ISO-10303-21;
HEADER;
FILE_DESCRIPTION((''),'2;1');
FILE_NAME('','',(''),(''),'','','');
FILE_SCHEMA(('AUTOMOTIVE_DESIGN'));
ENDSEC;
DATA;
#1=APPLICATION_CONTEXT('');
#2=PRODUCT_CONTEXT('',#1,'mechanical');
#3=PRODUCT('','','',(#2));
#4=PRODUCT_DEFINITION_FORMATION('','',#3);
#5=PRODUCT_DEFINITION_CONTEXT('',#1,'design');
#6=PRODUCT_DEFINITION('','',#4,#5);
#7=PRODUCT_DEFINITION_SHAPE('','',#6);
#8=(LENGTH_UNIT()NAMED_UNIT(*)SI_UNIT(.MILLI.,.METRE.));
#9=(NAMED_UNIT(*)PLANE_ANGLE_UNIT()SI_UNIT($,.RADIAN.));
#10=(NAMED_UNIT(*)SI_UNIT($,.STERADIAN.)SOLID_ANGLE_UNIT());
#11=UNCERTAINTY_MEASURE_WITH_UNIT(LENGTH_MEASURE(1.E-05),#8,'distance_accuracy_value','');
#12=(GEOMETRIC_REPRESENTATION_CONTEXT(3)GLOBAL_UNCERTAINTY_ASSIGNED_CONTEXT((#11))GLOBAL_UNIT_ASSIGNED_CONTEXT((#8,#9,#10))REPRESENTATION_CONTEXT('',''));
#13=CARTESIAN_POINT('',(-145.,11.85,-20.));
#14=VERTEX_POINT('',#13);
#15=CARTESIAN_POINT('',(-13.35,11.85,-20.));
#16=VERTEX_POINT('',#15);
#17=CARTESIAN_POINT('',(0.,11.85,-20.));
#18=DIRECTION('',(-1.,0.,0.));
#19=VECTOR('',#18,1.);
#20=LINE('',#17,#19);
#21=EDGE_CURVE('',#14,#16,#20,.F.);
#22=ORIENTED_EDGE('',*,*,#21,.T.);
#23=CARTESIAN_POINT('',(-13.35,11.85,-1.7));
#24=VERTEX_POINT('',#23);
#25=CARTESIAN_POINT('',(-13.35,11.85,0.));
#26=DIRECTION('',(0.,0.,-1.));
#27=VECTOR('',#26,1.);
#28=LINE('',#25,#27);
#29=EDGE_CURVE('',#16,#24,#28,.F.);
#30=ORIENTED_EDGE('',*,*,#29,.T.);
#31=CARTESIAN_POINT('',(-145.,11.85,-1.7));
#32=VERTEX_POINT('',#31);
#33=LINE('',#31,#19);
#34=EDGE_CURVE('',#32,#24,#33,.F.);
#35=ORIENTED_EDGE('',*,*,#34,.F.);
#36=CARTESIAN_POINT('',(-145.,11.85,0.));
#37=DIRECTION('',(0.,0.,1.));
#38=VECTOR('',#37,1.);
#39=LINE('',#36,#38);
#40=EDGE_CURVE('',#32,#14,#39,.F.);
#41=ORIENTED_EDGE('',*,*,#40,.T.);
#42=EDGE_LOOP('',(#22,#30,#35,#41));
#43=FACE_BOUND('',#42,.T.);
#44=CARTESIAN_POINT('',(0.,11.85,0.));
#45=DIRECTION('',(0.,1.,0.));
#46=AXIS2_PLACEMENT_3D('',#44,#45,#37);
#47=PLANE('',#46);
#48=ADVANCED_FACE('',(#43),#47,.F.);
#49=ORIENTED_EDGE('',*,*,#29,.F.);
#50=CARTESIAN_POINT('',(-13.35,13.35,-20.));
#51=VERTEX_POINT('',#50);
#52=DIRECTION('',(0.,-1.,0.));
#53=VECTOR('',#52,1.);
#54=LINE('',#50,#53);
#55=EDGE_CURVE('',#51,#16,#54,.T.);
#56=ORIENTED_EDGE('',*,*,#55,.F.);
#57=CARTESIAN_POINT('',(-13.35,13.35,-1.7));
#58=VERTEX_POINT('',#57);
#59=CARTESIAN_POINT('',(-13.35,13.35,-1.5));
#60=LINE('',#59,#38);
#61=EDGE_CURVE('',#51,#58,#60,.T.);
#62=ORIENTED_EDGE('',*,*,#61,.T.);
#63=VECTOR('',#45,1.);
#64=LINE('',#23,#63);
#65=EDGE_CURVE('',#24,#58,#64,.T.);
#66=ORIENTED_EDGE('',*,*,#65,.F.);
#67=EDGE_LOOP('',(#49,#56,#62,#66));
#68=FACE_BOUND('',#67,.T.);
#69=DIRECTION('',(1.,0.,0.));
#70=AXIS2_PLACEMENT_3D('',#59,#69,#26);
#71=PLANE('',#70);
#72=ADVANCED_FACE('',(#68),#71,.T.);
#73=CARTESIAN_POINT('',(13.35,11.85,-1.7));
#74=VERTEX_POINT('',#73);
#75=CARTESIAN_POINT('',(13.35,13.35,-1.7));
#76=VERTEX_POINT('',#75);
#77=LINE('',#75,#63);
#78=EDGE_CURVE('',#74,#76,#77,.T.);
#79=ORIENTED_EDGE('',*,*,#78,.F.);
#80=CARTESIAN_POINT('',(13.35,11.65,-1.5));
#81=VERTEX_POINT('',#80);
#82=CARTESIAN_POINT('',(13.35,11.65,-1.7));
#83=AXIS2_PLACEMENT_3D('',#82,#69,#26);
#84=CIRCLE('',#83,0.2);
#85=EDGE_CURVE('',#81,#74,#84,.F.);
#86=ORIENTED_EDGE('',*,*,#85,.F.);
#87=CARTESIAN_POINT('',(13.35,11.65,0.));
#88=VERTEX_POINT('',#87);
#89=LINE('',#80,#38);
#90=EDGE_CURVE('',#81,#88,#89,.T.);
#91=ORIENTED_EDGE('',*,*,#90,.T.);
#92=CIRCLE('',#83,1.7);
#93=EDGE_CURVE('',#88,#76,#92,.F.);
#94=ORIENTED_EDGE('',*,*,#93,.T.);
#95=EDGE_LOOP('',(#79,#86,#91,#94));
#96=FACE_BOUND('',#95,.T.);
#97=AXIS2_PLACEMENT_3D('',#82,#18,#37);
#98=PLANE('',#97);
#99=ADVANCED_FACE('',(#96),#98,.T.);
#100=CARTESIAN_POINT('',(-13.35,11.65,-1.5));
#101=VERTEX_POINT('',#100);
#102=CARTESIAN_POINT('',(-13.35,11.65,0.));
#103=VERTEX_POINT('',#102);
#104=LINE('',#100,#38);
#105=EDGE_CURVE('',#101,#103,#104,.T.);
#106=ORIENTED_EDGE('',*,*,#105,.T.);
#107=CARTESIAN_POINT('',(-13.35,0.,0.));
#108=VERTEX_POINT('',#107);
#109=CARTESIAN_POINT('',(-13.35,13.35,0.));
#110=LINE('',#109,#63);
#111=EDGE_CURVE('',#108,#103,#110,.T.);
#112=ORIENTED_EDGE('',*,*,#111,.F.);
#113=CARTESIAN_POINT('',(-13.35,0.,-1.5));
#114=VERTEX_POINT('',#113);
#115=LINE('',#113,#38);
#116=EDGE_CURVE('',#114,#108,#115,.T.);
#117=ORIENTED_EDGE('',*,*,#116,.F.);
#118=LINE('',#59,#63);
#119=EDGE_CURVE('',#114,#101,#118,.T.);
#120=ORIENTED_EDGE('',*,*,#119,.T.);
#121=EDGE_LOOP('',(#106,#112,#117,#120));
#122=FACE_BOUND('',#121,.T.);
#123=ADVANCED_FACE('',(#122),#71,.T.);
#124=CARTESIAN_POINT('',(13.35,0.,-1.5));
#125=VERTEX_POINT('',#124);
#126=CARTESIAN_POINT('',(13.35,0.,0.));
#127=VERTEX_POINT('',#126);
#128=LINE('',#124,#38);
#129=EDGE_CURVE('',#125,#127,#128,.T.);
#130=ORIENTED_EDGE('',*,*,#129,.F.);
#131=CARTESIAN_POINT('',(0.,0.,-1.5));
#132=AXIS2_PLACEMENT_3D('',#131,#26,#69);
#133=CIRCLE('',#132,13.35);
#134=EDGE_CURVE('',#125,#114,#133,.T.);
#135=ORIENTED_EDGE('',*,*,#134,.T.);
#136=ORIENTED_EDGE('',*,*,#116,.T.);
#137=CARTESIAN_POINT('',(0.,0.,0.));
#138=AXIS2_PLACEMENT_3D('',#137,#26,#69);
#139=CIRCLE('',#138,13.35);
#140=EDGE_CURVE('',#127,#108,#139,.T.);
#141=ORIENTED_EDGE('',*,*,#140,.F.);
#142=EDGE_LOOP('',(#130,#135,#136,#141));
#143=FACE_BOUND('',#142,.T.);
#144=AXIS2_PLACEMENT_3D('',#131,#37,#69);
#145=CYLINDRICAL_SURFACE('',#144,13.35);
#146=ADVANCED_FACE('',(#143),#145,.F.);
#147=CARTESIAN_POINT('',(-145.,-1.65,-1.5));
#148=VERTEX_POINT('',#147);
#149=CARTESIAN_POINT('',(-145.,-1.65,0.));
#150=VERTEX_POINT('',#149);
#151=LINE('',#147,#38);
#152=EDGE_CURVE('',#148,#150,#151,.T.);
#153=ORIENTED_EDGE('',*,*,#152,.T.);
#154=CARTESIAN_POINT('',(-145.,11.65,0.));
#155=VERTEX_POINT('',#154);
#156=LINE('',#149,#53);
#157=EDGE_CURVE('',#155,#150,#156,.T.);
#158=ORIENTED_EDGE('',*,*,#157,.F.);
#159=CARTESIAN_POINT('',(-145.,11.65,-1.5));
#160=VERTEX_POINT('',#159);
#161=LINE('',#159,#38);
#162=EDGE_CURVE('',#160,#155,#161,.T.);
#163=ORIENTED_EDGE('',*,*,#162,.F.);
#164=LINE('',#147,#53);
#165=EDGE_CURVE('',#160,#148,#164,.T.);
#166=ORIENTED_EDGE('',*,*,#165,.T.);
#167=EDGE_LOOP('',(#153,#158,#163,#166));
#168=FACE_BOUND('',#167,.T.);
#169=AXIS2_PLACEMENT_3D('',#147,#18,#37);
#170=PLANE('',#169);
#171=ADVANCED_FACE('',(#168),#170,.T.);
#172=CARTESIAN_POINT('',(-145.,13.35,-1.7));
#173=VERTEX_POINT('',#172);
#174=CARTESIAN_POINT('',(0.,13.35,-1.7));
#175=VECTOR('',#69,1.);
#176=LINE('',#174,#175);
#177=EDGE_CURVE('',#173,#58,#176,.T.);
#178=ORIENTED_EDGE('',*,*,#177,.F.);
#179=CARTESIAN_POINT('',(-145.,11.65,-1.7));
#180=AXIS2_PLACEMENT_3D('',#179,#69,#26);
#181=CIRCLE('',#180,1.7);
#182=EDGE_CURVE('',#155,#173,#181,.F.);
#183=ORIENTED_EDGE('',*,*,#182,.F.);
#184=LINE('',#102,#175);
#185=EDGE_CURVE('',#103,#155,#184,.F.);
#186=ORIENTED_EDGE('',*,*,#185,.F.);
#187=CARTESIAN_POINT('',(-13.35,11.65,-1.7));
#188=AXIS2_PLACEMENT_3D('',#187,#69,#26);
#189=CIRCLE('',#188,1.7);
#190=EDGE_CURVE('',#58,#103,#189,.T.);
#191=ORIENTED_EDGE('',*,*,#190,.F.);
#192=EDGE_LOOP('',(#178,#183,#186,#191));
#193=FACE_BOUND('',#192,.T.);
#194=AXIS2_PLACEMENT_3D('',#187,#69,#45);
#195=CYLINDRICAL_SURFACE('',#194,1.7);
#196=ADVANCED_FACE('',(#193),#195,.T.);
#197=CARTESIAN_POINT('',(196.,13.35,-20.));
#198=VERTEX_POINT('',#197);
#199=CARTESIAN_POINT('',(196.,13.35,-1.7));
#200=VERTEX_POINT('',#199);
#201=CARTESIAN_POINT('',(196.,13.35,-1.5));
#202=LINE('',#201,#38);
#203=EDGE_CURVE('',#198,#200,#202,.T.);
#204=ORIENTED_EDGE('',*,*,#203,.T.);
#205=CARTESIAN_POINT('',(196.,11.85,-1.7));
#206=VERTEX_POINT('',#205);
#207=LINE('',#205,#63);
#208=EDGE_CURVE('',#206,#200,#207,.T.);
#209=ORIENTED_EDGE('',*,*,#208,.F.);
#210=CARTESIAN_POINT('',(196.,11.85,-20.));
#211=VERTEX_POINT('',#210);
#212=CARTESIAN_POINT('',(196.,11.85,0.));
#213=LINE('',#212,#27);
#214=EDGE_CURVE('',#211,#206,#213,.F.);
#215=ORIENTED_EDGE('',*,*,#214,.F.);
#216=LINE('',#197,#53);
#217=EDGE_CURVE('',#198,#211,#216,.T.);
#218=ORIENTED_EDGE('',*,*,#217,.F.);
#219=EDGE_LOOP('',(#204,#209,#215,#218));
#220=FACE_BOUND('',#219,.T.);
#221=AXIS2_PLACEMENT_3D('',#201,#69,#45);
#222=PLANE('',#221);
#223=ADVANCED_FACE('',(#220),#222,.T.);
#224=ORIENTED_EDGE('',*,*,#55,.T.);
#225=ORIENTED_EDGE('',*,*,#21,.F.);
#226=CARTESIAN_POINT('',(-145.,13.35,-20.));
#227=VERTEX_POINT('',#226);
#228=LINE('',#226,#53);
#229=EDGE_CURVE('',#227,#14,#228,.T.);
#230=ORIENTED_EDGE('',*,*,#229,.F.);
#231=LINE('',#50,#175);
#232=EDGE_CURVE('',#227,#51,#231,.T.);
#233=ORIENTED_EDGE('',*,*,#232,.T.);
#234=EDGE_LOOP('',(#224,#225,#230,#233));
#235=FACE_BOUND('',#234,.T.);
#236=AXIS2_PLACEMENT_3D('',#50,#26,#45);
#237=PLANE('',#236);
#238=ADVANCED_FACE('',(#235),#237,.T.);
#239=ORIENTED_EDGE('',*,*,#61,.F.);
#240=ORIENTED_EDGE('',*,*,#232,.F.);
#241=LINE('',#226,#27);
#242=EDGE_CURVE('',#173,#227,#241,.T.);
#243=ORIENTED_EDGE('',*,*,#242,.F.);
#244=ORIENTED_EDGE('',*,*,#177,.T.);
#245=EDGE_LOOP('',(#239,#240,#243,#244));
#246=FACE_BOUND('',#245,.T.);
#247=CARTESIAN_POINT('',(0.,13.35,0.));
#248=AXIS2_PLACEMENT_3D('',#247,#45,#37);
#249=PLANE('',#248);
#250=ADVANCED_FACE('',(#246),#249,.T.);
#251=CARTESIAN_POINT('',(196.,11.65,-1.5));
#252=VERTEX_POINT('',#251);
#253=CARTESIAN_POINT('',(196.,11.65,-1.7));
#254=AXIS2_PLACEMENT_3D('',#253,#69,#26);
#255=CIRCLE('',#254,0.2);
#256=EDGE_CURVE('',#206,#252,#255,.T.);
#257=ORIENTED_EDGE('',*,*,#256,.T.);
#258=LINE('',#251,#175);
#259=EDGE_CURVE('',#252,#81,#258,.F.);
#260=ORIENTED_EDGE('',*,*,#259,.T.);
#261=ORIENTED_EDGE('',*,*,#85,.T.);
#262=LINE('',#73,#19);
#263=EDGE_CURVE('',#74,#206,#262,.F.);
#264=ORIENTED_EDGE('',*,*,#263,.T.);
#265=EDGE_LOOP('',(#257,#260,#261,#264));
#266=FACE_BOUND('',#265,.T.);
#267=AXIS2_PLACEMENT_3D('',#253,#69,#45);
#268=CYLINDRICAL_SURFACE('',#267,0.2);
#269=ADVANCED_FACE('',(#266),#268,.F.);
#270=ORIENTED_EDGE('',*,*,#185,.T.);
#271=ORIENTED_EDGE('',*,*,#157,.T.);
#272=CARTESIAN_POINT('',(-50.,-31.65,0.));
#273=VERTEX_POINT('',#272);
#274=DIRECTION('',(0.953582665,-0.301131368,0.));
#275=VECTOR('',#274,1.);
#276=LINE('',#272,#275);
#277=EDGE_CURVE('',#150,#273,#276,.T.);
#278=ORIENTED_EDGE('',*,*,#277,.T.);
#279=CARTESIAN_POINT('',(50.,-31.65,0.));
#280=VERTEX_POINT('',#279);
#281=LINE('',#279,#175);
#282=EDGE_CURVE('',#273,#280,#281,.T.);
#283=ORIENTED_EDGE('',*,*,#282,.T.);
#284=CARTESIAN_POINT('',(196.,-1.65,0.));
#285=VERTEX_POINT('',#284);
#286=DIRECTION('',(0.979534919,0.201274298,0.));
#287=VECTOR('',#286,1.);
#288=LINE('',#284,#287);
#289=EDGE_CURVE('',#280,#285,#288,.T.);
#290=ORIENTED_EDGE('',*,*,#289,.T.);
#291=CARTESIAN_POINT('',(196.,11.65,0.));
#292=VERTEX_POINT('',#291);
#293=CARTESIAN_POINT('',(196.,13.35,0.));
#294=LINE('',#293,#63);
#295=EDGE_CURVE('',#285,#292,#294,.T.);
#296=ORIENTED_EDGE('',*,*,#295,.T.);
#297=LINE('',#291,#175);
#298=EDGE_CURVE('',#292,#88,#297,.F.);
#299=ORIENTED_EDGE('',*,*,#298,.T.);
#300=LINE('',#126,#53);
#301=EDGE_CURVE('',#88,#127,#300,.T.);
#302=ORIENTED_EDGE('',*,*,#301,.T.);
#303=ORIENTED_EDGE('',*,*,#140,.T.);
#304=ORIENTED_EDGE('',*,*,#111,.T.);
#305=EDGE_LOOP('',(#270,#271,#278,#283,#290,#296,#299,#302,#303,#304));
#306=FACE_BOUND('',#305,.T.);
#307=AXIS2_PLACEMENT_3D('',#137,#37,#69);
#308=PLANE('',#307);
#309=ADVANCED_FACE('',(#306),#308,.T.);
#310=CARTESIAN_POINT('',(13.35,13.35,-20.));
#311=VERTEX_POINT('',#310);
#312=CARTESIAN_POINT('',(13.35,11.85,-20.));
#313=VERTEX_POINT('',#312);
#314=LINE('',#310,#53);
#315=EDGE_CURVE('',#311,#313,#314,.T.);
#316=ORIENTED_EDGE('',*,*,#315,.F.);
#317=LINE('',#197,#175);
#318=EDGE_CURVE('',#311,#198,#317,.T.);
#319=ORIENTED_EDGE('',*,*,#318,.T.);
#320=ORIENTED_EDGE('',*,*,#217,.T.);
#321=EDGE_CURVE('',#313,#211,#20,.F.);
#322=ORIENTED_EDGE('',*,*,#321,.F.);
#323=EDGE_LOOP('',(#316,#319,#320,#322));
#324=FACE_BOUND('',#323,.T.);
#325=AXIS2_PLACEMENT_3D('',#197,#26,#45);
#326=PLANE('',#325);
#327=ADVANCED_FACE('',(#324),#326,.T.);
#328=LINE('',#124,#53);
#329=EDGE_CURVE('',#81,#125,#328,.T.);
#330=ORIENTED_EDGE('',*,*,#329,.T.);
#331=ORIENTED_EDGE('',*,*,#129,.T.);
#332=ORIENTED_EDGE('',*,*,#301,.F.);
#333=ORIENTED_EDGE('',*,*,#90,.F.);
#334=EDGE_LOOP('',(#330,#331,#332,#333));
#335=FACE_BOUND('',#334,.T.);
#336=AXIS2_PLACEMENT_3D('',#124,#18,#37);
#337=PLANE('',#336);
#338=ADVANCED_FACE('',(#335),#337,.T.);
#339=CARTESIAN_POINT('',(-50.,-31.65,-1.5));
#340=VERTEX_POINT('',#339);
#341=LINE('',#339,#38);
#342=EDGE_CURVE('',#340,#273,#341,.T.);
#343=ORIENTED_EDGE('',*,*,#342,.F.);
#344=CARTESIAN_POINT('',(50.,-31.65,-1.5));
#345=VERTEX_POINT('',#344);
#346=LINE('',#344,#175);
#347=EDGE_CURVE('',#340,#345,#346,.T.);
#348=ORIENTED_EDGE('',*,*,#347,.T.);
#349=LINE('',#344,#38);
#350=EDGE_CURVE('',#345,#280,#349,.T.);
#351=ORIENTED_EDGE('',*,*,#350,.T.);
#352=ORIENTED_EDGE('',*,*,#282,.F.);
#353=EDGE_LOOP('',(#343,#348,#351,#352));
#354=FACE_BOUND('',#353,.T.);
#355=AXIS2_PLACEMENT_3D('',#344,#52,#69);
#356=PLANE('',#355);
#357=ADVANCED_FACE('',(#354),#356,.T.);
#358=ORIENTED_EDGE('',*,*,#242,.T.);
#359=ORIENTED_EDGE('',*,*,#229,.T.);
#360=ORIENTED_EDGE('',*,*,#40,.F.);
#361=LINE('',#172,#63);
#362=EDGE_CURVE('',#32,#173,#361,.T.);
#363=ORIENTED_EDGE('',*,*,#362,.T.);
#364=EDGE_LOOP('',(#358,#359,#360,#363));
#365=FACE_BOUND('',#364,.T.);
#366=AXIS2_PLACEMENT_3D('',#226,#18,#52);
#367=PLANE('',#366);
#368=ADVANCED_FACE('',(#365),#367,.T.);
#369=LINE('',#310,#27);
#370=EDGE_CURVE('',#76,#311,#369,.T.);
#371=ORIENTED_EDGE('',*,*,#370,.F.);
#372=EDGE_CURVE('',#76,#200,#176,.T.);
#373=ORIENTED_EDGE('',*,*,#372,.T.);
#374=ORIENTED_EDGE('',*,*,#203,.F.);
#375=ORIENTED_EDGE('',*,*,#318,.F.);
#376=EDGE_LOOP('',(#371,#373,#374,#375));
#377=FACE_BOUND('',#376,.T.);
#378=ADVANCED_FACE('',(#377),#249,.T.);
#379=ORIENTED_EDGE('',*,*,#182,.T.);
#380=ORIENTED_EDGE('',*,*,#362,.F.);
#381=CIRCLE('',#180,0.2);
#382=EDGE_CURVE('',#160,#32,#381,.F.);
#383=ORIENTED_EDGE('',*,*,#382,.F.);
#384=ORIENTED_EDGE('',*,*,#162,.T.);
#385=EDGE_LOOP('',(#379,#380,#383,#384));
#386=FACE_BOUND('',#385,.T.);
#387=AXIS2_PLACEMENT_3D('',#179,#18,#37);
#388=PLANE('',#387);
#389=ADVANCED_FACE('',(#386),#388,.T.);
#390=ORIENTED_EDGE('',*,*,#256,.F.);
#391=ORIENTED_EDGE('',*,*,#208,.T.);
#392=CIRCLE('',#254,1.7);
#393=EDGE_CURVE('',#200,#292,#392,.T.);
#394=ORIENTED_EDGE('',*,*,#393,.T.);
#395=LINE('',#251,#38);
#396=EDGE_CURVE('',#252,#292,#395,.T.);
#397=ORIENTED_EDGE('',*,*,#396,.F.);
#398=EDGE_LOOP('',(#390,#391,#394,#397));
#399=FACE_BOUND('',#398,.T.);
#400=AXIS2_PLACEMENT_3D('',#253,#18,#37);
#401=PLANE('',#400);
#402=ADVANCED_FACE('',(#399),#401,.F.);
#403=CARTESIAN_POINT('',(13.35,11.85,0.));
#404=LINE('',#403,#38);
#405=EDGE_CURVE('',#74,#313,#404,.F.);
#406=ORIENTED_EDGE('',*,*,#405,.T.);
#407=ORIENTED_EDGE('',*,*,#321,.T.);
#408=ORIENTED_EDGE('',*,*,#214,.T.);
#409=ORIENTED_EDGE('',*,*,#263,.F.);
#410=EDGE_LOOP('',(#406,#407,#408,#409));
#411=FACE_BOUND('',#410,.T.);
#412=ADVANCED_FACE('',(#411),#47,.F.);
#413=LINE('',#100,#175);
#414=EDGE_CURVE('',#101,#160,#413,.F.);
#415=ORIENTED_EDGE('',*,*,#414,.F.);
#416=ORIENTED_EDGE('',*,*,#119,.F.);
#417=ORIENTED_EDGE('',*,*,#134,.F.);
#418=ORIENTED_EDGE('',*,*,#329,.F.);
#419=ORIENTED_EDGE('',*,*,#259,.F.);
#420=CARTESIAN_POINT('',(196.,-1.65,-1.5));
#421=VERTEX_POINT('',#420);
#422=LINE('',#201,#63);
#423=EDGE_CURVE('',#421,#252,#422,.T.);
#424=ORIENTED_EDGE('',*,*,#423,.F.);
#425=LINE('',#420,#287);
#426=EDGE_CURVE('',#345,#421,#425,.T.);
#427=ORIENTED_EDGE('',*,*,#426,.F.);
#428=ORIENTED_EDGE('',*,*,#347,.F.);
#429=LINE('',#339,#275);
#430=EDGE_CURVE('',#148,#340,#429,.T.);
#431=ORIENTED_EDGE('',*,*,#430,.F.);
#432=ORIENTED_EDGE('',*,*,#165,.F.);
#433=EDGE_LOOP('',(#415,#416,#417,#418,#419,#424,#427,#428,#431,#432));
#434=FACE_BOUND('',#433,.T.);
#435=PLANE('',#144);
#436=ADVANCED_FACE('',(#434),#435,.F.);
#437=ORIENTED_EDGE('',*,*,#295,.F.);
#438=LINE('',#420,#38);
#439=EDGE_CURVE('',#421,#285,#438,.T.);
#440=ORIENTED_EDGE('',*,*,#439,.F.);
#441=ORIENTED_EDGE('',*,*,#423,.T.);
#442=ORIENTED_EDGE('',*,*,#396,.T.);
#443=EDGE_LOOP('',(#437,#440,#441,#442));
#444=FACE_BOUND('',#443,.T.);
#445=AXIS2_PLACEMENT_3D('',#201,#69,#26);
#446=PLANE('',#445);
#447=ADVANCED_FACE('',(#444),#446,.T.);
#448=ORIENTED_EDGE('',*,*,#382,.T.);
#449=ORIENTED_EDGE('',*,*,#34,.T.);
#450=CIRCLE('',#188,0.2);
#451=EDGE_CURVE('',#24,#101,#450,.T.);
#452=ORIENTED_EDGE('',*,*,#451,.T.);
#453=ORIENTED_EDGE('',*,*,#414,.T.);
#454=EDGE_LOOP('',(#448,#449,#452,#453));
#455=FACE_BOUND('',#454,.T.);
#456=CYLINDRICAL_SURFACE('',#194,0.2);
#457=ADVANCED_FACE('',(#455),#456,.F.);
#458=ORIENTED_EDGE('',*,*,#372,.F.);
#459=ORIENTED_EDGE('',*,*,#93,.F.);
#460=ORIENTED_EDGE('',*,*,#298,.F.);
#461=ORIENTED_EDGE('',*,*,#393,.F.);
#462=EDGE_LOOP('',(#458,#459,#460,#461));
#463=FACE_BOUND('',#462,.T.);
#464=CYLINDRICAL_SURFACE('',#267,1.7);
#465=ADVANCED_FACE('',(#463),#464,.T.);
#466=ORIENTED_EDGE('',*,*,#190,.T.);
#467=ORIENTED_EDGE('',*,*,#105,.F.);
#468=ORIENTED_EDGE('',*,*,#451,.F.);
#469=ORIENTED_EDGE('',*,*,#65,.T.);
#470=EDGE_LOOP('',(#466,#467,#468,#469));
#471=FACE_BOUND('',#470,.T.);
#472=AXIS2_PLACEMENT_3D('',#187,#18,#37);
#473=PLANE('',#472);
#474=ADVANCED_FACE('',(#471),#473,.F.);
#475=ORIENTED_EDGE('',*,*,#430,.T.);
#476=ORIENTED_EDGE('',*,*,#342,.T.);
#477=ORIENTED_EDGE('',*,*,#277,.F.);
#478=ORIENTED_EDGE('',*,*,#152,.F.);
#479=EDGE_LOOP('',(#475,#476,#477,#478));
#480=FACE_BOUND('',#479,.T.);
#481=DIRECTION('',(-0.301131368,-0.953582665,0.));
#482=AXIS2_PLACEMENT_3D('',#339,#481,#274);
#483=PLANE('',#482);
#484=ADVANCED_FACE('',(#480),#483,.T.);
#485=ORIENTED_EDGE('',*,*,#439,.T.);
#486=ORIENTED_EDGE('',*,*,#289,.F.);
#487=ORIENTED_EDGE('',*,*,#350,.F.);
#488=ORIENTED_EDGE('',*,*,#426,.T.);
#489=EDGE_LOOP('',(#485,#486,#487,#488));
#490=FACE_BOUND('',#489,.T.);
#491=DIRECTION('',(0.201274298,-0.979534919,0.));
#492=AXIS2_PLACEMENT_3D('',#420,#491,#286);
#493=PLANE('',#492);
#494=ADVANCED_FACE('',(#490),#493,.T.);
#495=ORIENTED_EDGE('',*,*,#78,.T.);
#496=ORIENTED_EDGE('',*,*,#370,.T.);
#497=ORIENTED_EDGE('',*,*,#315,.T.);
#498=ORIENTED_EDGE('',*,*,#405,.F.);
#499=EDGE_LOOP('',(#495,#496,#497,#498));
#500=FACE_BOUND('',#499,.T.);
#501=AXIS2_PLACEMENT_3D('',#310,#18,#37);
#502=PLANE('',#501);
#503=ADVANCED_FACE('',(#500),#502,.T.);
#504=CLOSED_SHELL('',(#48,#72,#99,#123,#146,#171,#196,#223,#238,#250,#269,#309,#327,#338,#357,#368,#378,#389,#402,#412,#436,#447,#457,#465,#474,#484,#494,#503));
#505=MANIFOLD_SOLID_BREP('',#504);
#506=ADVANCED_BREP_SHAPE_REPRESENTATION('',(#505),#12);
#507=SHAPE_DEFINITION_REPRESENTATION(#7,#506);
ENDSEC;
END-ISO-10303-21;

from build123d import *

# Parameters (mm, degrees)
BASE_FLANGE1_DEPTH             = 1.5
EDGE_FLANGE1_STRIP_W           = 6.4
EDGE_FLANGE1_STRIP_H           = 1.5
EDGE_FLANGE1_STRIP_CUT_DEPTH   = 131.65
EDGE_FLANGE1_STRIP_2_W         = 6.4
EDGE_FLANGE1_STRIP_2_H         = 1.5
EDGE_FLANGE1_STRIP_CUT_2_DEPTH = 182.65
EDGE_FLANGE1_DEPTH             = 131.65
EDGE_FLANGE1_BEND_DEPTH        = 182.65


# Sheet-metal steps are written as plain solids
with BuildPart() as part:
    # Sketch1 → Base-Flange1 (new body)
    with BuildSketch(Plane.XY):
        with BuildLine():
            Line((13.35, 0), (13.35, 13.35))
            Line((13.35, 13.35), (196, 13.35))
            Line((196, 13.35), (196, -1.65))
            Line((196, -1.65), (50, -31.65))
            Line((50, -31.65), (-50, -31.65))
            Line((-50, -31.65), (-145, -1.65))
            Line((-145, -1.65), (-145, 13.35))
            Line((-145, 13.35), (-13.35, 13.35))
            Line((-13.35, 13.35), (-13.35, 0))
            ThreePointArc((-13.35, 0), (0, -13.35), (13.35, 0))
        make_face()
    extrude(amount=-BASE_FLANGE1_DEPTH)

    # Edge-Flange1 strip (across the edge) → Edge-Flange1 strip cut (cut)
    with BuildSketch(Plane(origin=(-145, 13.35, -1.5), x_dir=(0, -1, 0), z_dir=(1, 0, 0))):
        with Locations((-1.5, -0.75)):
            Rectangle(EDGE_FLANGE1_STRIP_W, EDGE_FLANGE1_STRIP_H)
    extrude(amount=EDGE_FLANGE1_STRIP_CUT_DEPTH, mode=Mode.SUBTRACT)

    # Edge-Flange1 strip 2 (across the edge) → Edge-Flange1 strip cut 2 (cut)
    with BuildSketch(Plane(origin=(13.35, 13.35, -1.5), x_dir=(0, -1, 0), z_dir=(1, 0, 0))):
        with Locations((-1.5, -0.75)):
            Rectangle(EDGE_FLANGE1_STRIP_2_W, EDGE_FLANGE1_STRIP_2_H)
    extrude(amount=EDGE_FLANGE1_STRIP_CUT_2_DEPTH, mode=Mode.SUBTRACT)

    # Edge-Flange1 section (across the edge) → Edge-Flange1 (add)
    with BuildSketch(Plane(origin=(-145, 13.35, -1.5), x_dir=(0, -1, 0), z_dir=(1, 0, 0))):
        with BuildLine():
            Line((0, 0.2), (0, 18.5))
            Line((0, 18.5), (1.5, 18.5))
            Line((1.5, 18.5), (1.5, 0.2))
            ThreePointArc((1.5, 0.2), (1.558578644, 0.058578644), (1.7, 0))
            Line((1.7, 0), (1.7, -1.5))
            ThreePointArc((1.7, -1.5), (0.497918472, -1.002081528), (0, 0.2))
        make_face()
    extrude(amount=EDGE_FLANGE1_DEPTH)

    # Edge-Flange1 section 2 (across the edge) → Edge-Flange1 bend (add)
    with BuildSketch(Plane(origin=(13.35, 13.35, -1.5), x_dir=(0, -1, 0), z_dir=(1, 0, 0))):
        with BuildLine():
            Line((0, 0.2), (0, 18.5))
            Line((0, 18.5), (1.5, 18.5))
            Line((1.5, 18.5), (1.5, 0.2))
            ThreePointArc((1.5, 0.2), (1.558578644, 0.058578644), (1.7, 0))
            Line((1.7, 0), (1.7, -1.5))
            ThreePointArc((1.7, -1.5), (0.497918472, -1.002081528), (0, 0.2))
        make_face()
    extrude(amount=EDGE_FLANGE1_BEND_DEPTH)


solid = part.part
